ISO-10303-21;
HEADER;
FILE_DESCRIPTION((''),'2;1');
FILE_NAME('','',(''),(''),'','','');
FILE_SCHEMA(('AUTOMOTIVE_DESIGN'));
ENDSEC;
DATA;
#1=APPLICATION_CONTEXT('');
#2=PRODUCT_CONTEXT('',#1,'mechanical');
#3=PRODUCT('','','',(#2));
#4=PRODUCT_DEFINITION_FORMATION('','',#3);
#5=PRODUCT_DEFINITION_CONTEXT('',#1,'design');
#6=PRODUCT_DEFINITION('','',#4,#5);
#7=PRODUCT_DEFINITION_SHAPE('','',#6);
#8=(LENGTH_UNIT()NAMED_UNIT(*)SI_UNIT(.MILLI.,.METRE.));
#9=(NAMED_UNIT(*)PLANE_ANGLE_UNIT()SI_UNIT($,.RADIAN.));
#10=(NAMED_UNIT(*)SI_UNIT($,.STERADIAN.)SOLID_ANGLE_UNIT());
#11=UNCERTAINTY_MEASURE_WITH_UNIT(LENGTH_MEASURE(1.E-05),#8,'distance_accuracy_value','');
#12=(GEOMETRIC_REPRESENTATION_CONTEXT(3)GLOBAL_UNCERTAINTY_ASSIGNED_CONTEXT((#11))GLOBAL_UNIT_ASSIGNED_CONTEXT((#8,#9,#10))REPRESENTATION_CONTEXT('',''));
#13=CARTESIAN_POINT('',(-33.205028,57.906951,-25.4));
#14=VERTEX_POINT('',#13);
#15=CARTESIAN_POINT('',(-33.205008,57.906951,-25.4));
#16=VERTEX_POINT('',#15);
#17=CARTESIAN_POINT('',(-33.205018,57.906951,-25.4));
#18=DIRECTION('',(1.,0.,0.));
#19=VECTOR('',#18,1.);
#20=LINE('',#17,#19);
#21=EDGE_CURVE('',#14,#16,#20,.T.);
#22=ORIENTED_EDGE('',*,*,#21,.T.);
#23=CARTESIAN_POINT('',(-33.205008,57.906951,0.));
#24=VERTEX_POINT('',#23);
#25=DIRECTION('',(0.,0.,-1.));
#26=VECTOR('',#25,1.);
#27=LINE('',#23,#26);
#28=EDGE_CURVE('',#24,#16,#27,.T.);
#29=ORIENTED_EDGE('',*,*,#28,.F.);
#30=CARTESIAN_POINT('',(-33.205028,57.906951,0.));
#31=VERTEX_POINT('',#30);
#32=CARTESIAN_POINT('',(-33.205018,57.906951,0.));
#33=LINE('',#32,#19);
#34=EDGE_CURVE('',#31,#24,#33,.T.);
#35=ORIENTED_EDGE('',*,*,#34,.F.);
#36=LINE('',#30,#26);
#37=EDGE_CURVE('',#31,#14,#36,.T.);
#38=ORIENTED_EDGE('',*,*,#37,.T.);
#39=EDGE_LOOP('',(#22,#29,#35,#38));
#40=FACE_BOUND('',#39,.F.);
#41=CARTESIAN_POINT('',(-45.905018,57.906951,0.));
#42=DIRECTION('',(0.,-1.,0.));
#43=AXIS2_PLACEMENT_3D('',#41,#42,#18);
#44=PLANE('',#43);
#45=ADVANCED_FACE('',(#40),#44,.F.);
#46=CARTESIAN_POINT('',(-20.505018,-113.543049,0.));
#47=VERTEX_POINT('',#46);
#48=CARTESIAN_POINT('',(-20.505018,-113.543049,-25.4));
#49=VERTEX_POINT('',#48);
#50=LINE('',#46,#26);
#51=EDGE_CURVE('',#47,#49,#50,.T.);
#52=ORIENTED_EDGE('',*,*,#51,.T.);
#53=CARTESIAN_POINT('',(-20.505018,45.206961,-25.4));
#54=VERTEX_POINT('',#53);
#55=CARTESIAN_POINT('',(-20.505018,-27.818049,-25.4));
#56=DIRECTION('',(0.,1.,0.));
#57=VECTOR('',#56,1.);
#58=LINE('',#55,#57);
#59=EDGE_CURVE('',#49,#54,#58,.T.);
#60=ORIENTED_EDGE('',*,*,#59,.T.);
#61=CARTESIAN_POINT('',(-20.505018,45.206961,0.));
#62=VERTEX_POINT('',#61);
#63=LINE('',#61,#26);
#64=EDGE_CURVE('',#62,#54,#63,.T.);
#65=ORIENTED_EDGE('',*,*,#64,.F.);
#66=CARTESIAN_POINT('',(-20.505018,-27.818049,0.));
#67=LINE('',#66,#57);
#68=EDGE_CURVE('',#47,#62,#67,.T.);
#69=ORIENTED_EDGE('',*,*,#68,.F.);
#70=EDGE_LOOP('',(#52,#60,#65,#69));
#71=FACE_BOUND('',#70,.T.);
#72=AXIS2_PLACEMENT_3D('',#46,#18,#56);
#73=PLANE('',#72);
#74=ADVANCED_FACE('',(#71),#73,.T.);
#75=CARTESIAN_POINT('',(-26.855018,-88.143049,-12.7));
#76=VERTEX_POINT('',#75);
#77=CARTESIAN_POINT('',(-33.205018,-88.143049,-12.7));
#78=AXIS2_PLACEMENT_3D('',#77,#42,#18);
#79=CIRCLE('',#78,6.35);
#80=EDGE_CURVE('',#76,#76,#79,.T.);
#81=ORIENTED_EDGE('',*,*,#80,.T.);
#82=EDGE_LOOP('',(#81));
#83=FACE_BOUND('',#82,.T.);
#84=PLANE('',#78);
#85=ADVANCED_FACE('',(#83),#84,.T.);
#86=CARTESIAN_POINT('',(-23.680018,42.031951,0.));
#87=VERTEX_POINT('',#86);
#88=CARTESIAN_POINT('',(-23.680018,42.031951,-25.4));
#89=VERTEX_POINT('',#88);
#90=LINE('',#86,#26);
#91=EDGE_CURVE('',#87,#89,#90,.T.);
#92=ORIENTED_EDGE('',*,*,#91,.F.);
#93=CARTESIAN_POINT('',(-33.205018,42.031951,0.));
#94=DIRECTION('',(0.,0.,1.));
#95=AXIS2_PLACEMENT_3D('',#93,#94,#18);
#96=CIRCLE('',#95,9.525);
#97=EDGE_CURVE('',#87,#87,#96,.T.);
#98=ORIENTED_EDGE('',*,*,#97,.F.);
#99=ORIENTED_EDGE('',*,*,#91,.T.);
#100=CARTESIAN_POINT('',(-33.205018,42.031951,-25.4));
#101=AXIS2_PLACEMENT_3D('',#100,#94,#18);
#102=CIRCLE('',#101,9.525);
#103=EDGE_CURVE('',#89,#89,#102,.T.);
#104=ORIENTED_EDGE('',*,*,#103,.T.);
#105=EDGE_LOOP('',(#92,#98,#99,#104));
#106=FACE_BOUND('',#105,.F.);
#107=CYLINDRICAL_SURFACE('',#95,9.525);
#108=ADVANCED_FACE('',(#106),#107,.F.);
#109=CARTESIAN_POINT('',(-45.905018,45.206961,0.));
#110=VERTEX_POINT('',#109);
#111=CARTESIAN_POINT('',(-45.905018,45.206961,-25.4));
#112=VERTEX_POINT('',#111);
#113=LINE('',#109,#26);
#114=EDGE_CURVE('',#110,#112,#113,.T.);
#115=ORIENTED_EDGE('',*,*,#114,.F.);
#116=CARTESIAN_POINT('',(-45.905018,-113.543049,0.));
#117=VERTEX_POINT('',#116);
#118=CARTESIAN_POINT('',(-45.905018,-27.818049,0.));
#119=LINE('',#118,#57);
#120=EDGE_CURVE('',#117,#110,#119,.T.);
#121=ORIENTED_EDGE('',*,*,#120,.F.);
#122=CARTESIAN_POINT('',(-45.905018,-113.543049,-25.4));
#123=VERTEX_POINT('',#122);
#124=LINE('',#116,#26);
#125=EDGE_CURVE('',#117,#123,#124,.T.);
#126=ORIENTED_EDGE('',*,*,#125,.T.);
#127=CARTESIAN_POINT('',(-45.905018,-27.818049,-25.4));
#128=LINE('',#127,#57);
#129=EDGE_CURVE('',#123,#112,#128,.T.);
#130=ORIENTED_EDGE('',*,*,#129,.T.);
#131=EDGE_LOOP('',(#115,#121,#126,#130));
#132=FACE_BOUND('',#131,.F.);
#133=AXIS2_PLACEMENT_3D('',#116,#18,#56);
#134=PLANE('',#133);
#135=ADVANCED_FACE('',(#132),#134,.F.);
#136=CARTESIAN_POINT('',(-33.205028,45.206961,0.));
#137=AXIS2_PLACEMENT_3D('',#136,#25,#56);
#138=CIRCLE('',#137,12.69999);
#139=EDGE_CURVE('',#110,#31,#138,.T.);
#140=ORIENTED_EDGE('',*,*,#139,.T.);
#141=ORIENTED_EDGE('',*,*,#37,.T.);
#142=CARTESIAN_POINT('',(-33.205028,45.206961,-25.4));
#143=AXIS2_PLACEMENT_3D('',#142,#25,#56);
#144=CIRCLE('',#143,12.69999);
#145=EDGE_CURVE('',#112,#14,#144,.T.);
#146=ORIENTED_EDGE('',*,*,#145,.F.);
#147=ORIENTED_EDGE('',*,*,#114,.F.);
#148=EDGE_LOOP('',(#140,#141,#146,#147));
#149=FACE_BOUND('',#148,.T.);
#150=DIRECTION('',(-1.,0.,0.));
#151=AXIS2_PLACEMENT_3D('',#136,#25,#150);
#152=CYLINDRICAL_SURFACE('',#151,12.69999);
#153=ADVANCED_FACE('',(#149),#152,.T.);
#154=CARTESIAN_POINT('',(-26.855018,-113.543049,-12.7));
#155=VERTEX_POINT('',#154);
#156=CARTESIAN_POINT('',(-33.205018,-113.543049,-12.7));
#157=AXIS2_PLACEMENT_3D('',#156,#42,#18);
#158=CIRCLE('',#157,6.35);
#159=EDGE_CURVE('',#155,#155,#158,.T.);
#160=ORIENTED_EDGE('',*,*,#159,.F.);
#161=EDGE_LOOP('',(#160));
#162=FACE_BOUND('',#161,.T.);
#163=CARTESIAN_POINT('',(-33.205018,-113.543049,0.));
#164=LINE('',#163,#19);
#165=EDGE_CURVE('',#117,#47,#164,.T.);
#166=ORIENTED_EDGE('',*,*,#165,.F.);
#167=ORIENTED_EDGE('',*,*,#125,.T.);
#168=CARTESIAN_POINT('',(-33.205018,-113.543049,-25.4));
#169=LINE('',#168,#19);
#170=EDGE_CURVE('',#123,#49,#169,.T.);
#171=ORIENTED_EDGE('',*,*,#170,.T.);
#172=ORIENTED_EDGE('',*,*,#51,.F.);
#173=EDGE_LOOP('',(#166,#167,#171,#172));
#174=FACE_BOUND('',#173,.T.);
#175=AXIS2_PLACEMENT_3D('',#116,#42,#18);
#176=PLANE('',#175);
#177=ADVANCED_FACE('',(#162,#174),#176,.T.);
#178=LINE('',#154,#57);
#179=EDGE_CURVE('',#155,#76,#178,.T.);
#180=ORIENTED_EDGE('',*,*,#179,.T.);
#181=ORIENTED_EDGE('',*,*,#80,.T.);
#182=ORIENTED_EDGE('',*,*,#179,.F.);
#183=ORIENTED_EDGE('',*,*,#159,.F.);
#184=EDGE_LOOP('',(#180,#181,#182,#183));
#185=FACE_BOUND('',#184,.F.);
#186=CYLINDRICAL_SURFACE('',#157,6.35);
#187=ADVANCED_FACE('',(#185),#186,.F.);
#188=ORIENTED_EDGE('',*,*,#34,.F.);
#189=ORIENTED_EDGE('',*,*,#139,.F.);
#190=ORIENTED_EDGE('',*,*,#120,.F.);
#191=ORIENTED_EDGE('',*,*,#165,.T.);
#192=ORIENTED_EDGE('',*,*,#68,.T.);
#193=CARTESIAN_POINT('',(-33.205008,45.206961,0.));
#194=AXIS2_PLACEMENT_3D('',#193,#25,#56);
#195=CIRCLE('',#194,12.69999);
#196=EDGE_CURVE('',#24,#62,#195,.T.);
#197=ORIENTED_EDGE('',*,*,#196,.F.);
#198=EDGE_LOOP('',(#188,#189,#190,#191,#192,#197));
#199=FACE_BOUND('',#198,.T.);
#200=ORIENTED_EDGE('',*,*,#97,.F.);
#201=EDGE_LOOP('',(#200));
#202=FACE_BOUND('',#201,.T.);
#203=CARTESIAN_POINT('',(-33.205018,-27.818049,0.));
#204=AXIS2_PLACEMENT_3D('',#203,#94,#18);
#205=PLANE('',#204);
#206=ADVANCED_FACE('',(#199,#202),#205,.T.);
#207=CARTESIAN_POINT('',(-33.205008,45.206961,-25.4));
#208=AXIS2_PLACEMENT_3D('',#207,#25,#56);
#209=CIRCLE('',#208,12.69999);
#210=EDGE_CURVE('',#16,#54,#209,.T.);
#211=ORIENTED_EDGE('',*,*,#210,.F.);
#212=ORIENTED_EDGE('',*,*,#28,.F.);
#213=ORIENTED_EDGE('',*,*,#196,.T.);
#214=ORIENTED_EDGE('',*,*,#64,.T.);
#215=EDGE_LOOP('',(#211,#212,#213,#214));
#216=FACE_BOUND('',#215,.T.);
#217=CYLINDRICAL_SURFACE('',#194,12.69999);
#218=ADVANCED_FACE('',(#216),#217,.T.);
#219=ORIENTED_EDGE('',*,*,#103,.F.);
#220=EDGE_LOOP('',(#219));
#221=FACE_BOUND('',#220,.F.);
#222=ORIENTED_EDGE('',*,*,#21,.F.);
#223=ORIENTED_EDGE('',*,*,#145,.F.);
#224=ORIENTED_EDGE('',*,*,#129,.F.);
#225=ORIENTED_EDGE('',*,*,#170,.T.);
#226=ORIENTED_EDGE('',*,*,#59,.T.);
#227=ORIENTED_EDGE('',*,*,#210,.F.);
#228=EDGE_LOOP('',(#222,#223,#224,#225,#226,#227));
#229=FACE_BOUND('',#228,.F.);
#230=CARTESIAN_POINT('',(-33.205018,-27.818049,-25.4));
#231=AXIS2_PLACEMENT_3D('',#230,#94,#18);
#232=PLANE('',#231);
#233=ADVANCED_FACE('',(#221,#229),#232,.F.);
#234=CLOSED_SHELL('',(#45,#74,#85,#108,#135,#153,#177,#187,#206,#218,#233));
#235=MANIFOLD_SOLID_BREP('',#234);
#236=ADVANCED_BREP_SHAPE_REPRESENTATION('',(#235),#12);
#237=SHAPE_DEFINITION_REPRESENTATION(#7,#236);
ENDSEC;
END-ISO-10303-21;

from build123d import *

# Parameters (mm, degrees)
F0_W     = 25.4
F0_H     = 171.45
F0_R     = 9.525
F1_DEPTH = 25.4
F2_R     = 12.69999
F3_R     = 6.35
F4_DEPTH = 25.4


# Not quite as in the source:
# - a fillet or chamfer is up to 0.001 mm smaller than in the source, because OpenCascade refuses the exact size


with BuildPart() as f1:
    # F0 (on Top) → F1 (new body)
    with BuildSketch(Plane.XY):
        with Locations((-33.2050182253, -27.8180489531)):
            Rectangle(F0_W, F0_H)
        with Locations((-33.2050182253, 42.0319510469)):
            Circle(F0_R, mode=Mode.SUBTRACT)
    extrude(amount=-F1_DEPTH)

    # F2 (radius 12.7 in the source; OpenCascade refuses exactly that, so slightly less here)
    f2_edges = [f1.edges().sort_by_distance(p)[0] for p in [
        (-45.905018, 57.906951, -12.7),
        (-20.505018, 57.906951, -12.7),
    ]]
    fillet(f2_edges, radius=F2_R)

    # F3 (on face) → F4 (cut)
    with BuildSketch(Plane.XZ.offset(113.5430489531)):
        with Locations((-33.2050182253, -12.7)):
            Circle(F3_R)
    extrude(amount=-F4_DEPTH, mode=Mode.SUBTRACT)


solid = f1.part
